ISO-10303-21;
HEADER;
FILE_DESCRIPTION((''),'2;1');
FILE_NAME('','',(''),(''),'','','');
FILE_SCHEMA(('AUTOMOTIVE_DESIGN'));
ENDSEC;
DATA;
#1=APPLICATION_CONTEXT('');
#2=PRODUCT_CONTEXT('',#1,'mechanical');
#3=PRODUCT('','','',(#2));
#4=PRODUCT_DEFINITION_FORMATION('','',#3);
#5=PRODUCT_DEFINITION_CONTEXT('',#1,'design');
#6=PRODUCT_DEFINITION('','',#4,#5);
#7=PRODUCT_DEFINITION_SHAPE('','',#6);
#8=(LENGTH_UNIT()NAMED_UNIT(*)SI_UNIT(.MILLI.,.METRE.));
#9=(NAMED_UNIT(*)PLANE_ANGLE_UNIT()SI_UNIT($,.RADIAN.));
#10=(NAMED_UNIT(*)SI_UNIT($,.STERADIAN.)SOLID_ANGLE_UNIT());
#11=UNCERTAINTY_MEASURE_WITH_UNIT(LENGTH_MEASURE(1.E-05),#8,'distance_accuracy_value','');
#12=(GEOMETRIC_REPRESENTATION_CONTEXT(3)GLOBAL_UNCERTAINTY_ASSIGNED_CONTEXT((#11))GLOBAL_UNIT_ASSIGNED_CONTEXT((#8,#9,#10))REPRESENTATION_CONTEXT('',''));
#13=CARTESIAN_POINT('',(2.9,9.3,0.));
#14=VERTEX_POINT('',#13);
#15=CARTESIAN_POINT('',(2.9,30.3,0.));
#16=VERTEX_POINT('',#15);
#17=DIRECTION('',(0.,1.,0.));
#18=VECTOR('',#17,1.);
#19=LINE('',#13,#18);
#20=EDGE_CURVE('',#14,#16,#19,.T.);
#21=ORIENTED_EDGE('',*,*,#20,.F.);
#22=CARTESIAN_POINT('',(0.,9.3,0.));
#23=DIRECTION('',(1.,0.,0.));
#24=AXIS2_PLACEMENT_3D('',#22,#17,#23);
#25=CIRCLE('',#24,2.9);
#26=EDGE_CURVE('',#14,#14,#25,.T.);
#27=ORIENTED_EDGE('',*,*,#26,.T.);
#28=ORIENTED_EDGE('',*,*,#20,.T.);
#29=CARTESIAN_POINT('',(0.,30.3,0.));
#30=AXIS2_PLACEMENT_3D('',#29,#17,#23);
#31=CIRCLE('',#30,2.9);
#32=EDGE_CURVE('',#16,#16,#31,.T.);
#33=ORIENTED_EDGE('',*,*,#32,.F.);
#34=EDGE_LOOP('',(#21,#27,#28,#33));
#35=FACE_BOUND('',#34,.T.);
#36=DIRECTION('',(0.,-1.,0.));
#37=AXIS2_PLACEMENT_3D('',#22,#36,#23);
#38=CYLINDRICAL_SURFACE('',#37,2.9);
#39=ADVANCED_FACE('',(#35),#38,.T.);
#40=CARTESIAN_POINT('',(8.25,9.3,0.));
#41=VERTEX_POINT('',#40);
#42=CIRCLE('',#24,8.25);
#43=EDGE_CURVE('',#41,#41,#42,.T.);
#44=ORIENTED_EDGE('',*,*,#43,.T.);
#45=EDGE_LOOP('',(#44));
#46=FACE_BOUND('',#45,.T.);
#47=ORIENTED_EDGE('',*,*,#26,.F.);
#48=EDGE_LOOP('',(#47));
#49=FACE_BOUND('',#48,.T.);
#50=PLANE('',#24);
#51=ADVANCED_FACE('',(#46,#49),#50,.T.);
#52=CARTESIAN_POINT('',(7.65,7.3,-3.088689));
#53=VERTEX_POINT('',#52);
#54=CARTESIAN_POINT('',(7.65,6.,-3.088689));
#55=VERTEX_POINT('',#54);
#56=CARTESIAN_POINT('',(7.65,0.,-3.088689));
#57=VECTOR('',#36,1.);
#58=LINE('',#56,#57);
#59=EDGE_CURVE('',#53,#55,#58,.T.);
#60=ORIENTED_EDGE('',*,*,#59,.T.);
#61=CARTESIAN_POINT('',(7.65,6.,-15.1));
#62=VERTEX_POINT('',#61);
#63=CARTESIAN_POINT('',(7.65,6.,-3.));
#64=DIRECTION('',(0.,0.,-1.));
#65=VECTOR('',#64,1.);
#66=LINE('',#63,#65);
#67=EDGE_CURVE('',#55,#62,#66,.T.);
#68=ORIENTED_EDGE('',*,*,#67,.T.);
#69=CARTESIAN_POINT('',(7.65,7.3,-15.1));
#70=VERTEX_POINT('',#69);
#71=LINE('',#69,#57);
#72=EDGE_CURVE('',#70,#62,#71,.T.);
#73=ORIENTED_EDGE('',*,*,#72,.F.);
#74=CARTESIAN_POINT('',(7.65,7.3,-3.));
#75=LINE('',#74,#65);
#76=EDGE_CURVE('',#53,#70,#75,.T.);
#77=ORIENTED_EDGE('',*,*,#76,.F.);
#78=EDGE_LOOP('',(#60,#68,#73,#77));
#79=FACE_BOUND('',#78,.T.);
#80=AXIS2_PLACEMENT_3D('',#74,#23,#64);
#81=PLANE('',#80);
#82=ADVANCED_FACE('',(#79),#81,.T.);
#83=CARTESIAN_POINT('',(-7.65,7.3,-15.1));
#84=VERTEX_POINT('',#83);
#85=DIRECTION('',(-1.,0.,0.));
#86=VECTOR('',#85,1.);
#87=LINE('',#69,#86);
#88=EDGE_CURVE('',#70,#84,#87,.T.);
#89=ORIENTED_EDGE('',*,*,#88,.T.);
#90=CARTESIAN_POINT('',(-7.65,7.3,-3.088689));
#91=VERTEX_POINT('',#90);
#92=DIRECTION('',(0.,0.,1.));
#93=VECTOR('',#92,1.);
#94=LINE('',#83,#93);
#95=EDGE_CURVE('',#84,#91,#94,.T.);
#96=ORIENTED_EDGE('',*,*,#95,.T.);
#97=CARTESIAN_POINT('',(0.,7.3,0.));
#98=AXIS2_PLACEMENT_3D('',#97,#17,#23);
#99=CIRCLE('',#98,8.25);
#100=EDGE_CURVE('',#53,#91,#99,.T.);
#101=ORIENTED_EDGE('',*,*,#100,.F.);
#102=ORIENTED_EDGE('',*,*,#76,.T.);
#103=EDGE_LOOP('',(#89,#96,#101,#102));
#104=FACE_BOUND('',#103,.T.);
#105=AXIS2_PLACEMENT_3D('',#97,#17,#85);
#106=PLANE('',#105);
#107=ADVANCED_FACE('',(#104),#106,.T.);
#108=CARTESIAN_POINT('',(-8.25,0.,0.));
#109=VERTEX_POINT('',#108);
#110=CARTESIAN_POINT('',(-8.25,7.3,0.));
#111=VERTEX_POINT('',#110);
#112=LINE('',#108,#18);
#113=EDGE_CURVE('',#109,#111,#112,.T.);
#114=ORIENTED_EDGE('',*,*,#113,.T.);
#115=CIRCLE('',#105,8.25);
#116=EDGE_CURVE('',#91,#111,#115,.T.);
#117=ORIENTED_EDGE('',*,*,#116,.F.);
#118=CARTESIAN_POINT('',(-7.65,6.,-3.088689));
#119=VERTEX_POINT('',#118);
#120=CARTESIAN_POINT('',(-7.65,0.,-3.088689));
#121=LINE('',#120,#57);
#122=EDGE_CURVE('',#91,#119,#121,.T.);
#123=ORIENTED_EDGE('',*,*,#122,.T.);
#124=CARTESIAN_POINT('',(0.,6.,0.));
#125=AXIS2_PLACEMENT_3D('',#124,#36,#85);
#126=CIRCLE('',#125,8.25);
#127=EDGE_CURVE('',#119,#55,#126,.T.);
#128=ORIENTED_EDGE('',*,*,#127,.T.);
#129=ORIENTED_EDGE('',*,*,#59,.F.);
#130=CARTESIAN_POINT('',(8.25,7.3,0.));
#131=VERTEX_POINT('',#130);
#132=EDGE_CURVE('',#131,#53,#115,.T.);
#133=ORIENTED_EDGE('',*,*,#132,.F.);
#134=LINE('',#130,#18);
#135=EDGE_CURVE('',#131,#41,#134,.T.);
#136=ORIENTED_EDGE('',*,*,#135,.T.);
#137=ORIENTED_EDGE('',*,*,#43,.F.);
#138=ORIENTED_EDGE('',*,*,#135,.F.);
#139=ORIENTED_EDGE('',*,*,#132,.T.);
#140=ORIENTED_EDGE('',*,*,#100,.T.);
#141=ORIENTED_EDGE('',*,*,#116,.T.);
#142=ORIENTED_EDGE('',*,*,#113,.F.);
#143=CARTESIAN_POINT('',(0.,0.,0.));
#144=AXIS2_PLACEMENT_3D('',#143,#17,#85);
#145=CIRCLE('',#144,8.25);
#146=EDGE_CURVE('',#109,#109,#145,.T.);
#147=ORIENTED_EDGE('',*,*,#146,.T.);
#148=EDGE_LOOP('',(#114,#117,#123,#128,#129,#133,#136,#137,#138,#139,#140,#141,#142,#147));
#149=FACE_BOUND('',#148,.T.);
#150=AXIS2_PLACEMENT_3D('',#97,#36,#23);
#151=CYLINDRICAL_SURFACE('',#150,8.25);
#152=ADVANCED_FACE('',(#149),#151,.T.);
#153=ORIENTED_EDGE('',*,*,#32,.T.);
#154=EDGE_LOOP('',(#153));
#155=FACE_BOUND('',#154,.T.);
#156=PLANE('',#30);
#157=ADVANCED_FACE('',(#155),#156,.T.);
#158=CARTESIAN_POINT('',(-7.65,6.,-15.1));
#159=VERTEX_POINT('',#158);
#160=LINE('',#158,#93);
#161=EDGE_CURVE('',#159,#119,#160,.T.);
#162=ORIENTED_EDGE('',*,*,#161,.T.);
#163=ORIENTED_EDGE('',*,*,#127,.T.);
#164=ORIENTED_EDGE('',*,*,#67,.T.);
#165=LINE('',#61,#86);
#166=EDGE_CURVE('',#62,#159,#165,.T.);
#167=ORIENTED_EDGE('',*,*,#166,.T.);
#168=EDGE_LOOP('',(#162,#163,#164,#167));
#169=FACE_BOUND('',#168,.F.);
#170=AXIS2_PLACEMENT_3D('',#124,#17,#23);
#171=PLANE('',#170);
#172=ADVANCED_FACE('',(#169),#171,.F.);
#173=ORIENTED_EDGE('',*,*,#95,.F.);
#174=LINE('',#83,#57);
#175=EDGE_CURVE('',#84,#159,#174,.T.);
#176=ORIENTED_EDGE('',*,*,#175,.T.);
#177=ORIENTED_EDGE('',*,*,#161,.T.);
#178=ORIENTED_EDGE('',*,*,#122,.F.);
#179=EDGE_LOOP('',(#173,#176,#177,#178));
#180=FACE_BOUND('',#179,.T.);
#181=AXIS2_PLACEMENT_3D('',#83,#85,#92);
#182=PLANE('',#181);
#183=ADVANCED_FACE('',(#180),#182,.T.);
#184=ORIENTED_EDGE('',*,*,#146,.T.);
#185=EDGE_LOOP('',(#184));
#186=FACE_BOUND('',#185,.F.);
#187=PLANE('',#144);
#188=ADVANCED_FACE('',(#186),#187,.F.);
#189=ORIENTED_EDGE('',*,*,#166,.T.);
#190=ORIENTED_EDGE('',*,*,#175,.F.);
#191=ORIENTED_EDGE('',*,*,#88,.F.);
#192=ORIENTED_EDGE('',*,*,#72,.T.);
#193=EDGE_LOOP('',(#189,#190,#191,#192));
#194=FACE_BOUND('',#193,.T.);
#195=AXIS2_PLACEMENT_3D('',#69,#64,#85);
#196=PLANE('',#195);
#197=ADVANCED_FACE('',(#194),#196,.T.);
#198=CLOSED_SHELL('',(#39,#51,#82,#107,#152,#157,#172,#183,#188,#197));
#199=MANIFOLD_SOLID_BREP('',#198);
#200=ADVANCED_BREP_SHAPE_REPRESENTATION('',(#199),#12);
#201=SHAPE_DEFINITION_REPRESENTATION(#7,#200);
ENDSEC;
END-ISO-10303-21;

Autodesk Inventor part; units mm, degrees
ref_plane "YZ Plane" through (0, 0, 0) normal (1, 0, 0) x (0, 1, 0)
ref_plane "XZ Plane" through (0, 0, 0) normal (0, 1, 0) x (-1, 0, 0)
ref_plane "XY Plane" through (0, 0, 0) normal (0, 0, 1) x (1, 0, 0)
sketch "Sketch1" plane through (0, 0, 0) normal (0, 1, 0) x (-1, 0, 0)
  circle A0 centre (0, 0) radius 8.25
  dimension "d0" = 16.5
extrude "Extrusion1" add sketch "Sketch1" along normal blind 7.3
sketch "Sketch3" plane through (0, 7.3, 0) normal (0, 1, 0) x (1, 0, 0)
  line L0 (-7.65, 3) -> (7.65, 3)
  line L1 (7.65, 3) -> (7.65, 15.1)
  line L2 (7.65, 15.1) -> (-7.65, 15.1)
  line L3 (-7.65, 15.1) -> (-7.65, 3)
  point P0 (0, 0)
  dimension "d3" = 15.3
  dimension "d4" = 3
  dimension "d5" = 7.65
  dimension "d6" = 12.1
extrude "Extrusion2" add sketch "Sketch3" against normal blind 1.3
sketch "Sketch4" plane through (0, 7.3, 0) normal (0, 1, 0) x (1, 0, 0)
  circle A0 centre (0, 0) radius 8.25
  dimension "d9" = 16.5
extrude "Extrusion3" add sketch "Sketch4" along normal blind 2
sketch "Sketch5" plane through (0, 9.3, 0) normal (0, 1, 0) x (1, 0, 0)
  circle A0 centre (0, 0) radius 2.9
  dimension "d12" = 5.8
extrude "Extrusion4" add sketch "Sketch5" along normal blind 21
properties part number "Potentiometer_Model"
